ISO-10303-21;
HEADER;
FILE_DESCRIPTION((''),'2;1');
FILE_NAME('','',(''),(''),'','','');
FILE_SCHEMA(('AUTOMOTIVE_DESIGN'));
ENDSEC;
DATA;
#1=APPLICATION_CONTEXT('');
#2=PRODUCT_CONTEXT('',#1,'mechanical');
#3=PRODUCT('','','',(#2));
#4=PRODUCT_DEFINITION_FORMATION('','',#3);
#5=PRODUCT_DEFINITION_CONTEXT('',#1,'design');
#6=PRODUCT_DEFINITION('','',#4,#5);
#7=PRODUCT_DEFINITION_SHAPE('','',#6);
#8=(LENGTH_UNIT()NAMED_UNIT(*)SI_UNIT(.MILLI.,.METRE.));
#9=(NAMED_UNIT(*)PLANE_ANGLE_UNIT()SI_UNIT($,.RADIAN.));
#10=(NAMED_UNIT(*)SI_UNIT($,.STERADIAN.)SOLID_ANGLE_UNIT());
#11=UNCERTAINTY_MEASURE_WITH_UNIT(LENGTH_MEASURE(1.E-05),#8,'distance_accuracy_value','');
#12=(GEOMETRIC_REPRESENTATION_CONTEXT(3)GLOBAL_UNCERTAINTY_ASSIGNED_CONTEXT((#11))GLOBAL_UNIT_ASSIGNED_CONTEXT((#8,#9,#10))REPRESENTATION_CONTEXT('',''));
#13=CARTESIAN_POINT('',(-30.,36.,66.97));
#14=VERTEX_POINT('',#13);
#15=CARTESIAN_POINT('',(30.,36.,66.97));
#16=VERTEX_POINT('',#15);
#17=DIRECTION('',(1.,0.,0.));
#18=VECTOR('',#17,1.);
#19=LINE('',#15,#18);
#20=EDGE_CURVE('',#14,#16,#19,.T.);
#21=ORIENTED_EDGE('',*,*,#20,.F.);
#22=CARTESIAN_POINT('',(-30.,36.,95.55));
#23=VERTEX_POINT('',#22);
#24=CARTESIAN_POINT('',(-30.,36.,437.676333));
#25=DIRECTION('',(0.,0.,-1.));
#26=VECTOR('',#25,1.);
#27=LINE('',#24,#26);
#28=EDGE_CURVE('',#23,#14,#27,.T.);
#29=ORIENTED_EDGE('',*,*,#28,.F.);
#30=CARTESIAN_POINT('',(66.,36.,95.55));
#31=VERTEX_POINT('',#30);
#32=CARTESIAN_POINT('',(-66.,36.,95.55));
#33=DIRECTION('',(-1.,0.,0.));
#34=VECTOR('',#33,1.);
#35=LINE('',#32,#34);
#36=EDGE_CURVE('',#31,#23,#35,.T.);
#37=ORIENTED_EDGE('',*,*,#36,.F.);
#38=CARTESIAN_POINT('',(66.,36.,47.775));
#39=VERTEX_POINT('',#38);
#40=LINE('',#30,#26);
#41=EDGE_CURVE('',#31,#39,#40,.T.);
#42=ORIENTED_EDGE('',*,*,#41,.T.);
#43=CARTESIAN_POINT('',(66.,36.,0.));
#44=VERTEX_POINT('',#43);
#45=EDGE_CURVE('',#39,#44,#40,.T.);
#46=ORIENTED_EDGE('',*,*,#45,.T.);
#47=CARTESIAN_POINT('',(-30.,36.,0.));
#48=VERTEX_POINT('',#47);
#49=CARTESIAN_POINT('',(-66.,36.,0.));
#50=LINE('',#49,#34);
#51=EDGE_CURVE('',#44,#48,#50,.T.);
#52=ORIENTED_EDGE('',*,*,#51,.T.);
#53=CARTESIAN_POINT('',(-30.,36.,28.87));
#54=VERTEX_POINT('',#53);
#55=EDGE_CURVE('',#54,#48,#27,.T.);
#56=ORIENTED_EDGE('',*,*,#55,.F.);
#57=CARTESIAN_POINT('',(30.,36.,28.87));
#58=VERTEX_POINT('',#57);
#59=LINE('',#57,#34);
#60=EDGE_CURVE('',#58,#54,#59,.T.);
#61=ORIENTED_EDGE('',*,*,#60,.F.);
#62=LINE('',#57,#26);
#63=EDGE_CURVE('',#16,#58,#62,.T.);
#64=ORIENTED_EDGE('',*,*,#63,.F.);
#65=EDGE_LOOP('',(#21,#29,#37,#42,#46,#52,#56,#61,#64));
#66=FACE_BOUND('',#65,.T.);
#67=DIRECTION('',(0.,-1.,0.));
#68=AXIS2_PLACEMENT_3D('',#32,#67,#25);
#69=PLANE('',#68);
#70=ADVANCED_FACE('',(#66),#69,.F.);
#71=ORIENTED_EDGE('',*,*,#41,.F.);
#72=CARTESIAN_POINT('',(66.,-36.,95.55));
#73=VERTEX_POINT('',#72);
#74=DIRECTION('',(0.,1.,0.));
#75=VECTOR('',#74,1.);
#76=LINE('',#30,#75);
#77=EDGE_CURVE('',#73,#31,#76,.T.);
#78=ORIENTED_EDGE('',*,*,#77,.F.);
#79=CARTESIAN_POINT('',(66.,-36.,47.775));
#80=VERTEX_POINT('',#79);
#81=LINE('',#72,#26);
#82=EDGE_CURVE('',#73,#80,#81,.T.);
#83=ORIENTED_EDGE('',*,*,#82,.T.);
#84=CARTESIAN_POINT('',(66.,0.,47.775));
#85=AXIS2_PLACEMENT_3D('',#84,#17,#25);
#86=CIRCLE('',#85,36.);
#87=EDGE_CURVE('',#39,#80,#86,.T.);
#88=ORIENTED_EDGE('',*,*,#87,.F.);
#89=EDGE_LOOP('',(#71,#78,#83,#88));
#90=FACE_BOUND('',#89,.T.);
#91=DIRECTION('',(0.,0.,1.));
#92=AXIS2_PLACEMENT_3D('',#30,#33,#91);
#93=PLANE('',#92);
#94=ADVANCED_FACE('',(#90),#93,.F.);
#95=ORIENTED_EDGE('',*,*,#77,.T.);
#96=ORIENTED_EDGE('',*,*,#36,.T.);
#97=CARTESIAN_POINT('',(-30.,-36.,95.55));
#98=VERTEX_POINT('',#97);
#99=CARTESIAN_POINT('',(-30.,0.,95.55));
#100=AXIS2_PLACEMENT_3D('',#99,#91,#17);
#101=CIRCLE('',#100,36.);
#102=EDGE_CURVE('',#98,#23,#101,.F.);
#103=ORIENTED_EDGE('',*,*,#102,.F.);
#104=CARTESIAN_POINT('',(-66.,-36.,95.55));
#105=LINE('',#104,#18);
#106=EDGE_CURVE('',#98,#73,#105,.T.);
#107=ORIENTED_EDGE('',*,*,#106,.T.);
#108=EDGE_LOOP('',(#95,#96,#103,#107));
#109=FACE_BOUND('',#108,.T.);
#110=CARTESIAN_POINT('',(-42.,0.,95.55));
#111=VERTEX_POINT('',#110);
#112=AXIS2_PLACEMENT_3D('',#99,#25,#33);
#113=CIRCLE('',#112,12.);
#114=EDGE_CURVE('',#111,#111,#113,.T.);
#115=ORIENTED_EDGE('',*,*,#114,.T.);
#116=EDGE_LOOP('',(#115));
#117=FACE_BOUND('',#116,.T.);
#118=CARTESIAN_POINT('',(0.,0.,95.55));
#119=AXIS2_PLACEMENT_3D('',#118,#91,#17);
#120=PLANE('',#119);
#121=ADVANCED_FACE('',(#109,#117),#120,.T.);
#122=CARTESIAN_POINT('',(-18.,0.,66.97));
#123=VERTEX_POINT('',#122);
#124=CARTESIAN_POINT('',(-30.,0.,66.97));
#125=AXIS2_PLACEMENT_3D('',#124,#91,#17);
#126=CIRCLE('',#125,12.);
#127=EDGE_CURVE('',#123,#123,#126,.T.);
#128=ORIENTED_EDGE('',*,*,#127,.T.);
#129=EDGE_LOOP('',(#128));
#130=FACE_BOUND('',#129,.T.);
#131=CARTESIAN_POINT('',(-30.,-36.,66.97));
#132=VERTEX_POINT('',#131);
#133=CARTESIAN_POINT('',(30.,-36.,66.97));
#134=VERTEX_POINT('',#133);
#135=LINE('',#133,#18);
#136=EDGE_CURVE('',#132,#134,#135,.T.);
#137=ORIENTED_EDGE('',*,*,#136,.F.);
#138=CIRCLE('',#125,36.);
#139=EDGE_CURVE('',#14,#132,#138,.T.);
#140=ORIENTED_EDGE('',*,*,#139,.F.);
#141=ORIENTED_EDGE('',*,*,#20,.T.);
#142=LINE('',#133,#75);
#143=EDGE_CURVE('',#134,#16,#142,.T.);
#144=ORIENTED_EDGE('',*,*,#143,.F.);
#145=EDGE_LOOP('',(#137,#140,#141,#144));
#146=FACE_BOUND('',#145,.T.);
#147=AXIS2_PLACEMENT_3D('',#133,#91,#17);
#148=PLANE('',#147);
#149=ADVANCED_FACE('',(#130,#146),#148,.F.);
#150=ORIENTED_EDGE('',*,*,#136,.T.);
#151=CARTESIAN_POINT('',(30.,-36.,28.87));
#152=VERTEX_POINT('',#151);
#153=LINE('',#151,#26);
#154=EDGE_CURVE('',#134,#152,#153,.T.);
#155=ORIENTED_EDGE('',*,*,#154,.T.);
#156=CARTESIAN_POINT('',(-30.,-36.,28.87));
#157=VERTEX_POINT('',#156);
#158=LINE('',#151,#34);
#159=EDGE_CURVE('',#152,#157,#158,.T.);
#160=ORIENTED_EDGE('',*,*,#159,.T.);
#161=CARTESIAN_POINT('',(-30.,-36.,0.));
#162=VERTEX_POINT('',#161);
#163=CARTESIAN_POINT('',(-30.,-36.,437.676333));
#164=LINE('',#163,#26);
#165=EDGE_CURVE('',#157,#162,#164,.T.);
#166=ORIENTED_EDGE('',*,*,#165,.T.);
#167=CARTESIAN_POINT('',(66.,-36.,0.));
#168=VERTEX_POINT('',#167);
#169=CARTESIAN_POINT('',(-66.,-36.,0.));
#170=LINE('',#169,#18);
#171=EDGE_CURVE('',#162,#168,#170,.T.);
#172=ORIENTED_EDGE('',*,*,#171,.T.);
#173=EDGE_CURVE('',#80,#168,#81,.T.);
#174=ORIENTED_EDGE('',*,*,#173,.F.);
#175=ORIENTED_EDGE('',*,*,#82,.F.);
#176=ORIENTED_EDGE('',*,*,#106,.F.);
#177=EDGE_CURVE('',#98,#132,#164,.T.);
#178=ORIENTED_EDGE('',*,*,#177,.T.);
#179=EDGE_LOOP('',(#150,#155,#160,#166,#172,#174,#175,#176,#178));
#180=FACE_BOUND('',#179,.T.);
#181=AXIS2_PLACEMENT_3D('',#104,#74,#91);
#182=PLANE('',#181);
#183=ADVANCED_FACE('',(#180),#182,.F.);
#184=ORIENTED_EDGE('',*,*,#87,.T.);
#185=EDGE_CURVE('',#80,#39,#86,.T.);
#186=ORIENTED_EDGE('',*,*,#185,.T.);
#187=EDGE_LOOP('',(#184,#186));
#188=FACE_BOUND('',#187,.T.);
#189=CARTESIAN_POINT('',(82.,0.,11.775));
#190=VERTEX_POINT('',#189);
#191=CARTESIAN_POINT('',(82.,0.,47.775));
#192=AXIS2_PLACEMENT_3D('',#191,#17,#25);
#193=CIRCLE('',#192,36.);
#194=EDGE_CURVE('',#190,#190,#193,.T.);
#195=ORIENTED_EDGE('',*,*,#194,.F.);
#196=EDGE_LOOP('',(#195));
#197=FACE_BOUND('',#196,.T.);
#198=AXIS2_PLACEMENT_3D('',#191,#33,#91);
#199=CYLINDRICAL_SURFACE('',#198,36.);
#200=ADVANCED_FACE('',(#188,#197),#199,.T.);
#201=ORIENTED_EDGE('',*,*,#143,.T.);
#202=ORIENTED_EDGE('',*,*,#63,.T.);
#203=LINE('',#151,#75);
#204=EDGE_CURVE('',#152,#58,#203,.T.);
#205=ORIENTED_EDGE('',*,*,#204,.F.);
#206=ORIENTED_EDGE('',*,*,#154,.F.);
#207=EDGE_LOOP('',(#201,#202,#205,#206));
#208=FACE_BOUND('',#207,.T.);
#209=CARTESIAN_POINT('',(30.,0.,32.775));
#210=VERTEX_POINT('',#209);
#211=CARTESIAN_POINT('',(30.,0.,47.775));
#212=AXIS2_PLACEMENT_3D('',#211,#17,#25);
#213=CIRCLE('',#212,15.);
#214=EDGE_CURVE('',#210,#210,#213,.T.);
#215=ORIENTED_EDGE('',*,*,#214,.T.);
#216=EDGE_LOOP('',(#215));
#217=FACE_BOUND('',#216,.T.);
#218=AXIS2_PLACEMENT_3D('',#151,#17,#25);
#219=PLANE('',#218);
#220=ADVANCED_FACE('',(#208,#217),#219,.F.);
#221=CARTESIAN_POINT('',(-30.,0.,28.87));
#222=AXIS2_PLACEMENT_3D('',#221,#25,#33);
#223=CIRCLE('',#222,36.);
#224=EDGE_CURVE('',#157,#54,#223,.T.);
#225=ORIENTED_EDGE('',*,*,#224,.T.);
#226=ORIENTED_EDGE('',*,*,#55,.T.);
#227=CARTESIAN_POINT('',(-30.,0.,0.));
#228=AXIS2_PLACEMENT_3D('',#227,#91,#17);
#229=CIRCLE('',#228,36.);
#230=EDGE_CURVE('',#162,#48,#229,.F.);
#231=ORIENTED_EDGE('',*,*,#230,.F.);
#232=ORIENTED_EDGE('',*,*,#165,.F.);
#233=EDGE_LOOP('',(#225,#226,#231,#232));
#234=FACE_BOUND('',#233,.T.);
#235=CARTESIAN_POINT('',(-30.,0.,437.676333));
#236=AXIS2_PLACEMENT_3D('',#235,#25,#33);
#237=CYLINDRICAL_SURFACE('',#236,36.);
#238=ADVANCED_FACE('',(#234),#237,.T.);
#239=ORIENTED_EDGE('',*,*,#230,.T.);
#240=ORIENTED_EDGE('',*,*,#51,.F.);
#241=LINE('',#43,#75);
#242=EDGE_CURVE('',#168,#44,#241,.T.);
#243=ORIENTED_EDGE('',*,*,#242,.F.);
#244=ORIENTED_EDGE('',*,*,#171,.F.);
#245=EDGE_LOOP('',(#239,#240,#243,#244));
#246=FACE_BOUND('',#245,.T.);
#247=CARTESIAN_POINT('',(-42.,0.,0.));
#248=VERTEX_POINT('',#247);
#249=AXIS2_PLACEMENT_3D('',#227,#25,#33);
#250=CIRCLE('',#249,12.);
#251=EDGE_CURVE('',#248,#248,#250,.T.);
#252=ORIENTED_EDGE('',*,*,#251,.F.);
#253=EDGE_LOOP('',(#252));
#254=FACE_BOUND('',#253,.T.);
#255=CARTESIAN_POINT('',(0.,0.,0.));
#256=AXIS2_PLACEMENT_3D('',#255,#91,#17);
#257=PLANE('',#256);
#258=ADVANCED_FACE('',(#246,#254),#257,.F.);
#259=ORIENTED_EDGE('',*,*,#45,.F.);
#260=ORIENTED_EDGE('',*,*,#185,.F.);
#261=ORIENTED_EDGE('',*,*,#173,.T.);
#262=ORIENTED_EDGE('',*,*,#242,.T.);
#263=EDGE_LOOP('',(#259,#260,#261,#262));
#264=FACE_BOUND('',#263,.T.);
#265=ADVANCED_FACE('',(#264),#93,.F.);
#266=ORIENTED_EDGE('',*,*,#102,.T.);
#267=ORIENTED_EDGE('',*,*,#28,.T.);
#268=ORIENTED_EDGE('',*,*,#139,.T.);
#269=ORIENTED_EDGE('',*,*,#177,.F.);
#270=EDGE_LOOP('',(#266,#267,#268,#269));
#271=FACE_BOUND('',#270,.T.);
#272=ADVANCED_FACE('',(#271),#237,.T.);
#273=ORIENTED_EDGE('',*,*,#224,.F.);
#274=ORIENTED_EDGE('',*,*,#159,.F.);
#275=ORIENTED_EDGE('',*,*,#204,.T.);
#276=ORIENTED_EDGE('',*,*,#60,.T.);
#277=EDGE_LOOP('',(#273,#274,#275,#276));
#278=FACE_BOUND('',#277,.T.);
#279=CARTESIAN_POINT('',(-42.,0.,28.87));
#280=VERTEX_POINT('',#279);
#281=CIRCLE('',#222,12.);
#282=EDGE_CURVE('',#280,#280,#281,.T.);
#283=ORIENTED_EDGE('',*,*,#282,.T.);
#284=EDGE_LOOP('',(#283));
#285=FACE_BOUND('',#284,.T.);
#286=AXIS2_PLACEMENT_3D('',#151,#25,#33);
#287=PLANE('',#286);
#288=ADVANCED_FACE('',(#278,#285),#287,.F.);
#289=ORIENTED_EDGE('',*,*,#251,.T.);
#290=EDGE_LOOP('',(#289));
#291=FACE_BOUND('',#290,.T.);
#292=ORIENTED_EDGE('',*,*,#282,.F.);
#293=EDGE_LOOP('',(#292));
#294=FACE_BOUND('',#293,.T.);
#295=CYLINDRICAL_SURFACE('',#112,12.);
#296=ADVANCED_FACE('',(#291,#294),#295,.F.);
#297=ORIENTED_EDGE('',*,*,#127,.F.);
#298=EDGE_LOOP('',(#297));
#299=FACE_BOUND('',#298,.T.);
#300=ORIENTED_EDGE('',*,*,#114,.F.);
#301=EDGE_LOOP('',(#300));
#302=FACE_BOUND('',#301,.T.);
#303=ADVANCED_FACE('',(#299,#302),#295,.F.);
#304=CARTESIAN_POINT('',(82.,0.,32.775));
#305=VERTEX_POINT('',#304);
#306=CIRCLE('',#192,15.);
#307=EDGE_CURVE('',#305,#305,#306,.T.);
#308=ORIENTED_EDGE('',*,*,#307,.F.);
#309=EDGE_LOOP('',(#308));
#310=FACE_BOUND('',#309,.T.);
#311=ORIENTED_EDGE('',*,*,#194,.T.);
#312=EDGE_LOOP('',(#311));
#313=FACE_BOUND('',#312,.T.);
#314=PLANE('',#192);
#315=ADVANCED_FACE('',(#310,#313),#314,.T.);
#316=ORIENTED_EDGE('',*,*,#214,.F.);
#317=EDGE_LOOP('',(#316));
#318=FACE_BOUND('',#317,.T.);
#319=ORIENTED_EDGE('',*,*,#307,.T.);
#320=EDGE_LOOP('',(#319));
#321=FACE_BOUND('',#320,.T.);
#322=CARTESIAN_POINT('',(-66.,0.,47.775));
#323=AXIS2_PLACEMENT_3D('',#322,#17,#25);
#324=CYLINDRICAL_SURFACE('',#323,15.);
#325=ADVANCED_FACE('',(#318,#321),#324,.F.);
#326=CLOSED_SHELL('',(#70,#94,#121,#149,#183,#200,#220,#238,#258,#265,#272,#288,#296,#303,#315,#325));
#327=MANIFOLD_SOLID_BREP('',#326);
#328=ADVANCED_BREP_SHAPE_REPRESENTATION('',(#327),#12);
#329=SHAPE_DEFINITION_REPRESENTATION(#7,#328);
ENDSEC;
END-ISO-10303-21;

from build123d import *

# Parameters (mm, degrees)
SKETCH1_W           = 132
SKETCH1_H           = 72
BOSS_EXTRUDE1_DEPTH = 95.55
CUT_EXTRUDE3_START  = -95.55
CUT_EXTRUDE3_DEPTH  = 95.55
SKETCH3_W           = 96
SKETCH3_H           = 38.1
CUT_EXTRUDE4_DEPTH  = 137.637485706
SKETCH4_R           = 15
CUT_EXTRUDE5_DEPTH  = 167.88260095
BOSS_EXTRUDE2_START = 16
SKETCH5_R           = 36
SKETCH5_R_2         = 15
BOSS_EXTRUDE2_DEPTH = 16
SKETCH6_R           = 12
CUT_EXTRUDE6_DEPTH  = 131.957254476


# Read off the part's stored shape, not the designer's step: Cut-Extrude3
with BuildPart() as part:
    # Sketch1 → Boss-Extrude1 (new body)
    with BuildSketch(Plane.XY):
        Rectangle(SKETCH1_W, SKETCH1_H)
    extrude(amount=BOSS_EXTRUDE1_DEPTH)

    # Cut-Extrude3 outline → Cut-Extrude3 (cut)
    with BuildSketch(Plane.XY.offset(95.55).offset(CUT_EXTRUDE3_START)):
        with BuildLine():
            Line((-66, -36), (-30, -36))
            ThreePointArc((-30, -36), (-55.455844123, -25.455844123), (-66, 0))
            Line((-66, 0), (-66, -36))
        make_face()
        with BuildLine():
            Line((-66, 36), (-66, 0))
            ThreePointArc((-66, 0), (-55.455844123, 25.455844123), (-30, 36))
            Line((-30, 36), (-66, 36))
        make_face()
    extrude(amount=CUT_EXTRUDE3_DEPTH, mode=Mode.SUBTRACT)

    # Sketch3 → Cut-Extrude4 (cut, through all)
    with BuildSketch(Plane(origin=(0, 36, 0), x_dir=(1, 0, 0), z_dir=(0, 1, 0))):
        with Locations((-18, -47.92)):
            Rectangle(SKETCH3_W, SKETCH3_H)
    extrude(amount=-CUT_EXTRUDE4_DEPTH, mode=Mode.SUBTRACT)

    # Sketch4 → Cut-Extrude5 (cut, through all)
    with BuildSketch(Plane(origin=(66, 0, 0), x_dir=(0, 0, -1), z_dir=(1, 0, 0))):
        with Locations((-47.775, 0)):
            Circle(SKETCH4_R)
    extrude(amount=-CUT_EXTRUDE5_DEPTH, mode=Mode.SUBTRACT)

    # Sketch5 → Boss-Extrude2 (add)
    with BuildSketch(Plane(origin=(66, 0, 0), x_dir=(0, 0, -1), z_dir=(1, 0, 0)).offset(BOSS_EXTRUDE2_START)):
        with Locations(Location((-47.775, 0, 0), (0, 0, 270))):
            Circle(SKETCH5_R)
        with Locations((-47.775, 0)):
            Circle(SKETCH5_R_2, mode=Mode.SUBTRACT)
    extrude(amount=-BOSS_EXTRUDE2_DEPTH)

    # Sketch6 → Cut-Extrude6 (cut, through all)
    with BuildSketch(Plane(origin=(0, 0, 0), x_dir=(-1, 0, 0), z_dir=(0, 0, -1))):
        with Locations((30, 0)):
            Circle(SKETCH6_R)
    extrude(amount=-CUT_EXTRUDE6_DEPTH, mode=Mode.SUBTRACT)


solid = part.part
